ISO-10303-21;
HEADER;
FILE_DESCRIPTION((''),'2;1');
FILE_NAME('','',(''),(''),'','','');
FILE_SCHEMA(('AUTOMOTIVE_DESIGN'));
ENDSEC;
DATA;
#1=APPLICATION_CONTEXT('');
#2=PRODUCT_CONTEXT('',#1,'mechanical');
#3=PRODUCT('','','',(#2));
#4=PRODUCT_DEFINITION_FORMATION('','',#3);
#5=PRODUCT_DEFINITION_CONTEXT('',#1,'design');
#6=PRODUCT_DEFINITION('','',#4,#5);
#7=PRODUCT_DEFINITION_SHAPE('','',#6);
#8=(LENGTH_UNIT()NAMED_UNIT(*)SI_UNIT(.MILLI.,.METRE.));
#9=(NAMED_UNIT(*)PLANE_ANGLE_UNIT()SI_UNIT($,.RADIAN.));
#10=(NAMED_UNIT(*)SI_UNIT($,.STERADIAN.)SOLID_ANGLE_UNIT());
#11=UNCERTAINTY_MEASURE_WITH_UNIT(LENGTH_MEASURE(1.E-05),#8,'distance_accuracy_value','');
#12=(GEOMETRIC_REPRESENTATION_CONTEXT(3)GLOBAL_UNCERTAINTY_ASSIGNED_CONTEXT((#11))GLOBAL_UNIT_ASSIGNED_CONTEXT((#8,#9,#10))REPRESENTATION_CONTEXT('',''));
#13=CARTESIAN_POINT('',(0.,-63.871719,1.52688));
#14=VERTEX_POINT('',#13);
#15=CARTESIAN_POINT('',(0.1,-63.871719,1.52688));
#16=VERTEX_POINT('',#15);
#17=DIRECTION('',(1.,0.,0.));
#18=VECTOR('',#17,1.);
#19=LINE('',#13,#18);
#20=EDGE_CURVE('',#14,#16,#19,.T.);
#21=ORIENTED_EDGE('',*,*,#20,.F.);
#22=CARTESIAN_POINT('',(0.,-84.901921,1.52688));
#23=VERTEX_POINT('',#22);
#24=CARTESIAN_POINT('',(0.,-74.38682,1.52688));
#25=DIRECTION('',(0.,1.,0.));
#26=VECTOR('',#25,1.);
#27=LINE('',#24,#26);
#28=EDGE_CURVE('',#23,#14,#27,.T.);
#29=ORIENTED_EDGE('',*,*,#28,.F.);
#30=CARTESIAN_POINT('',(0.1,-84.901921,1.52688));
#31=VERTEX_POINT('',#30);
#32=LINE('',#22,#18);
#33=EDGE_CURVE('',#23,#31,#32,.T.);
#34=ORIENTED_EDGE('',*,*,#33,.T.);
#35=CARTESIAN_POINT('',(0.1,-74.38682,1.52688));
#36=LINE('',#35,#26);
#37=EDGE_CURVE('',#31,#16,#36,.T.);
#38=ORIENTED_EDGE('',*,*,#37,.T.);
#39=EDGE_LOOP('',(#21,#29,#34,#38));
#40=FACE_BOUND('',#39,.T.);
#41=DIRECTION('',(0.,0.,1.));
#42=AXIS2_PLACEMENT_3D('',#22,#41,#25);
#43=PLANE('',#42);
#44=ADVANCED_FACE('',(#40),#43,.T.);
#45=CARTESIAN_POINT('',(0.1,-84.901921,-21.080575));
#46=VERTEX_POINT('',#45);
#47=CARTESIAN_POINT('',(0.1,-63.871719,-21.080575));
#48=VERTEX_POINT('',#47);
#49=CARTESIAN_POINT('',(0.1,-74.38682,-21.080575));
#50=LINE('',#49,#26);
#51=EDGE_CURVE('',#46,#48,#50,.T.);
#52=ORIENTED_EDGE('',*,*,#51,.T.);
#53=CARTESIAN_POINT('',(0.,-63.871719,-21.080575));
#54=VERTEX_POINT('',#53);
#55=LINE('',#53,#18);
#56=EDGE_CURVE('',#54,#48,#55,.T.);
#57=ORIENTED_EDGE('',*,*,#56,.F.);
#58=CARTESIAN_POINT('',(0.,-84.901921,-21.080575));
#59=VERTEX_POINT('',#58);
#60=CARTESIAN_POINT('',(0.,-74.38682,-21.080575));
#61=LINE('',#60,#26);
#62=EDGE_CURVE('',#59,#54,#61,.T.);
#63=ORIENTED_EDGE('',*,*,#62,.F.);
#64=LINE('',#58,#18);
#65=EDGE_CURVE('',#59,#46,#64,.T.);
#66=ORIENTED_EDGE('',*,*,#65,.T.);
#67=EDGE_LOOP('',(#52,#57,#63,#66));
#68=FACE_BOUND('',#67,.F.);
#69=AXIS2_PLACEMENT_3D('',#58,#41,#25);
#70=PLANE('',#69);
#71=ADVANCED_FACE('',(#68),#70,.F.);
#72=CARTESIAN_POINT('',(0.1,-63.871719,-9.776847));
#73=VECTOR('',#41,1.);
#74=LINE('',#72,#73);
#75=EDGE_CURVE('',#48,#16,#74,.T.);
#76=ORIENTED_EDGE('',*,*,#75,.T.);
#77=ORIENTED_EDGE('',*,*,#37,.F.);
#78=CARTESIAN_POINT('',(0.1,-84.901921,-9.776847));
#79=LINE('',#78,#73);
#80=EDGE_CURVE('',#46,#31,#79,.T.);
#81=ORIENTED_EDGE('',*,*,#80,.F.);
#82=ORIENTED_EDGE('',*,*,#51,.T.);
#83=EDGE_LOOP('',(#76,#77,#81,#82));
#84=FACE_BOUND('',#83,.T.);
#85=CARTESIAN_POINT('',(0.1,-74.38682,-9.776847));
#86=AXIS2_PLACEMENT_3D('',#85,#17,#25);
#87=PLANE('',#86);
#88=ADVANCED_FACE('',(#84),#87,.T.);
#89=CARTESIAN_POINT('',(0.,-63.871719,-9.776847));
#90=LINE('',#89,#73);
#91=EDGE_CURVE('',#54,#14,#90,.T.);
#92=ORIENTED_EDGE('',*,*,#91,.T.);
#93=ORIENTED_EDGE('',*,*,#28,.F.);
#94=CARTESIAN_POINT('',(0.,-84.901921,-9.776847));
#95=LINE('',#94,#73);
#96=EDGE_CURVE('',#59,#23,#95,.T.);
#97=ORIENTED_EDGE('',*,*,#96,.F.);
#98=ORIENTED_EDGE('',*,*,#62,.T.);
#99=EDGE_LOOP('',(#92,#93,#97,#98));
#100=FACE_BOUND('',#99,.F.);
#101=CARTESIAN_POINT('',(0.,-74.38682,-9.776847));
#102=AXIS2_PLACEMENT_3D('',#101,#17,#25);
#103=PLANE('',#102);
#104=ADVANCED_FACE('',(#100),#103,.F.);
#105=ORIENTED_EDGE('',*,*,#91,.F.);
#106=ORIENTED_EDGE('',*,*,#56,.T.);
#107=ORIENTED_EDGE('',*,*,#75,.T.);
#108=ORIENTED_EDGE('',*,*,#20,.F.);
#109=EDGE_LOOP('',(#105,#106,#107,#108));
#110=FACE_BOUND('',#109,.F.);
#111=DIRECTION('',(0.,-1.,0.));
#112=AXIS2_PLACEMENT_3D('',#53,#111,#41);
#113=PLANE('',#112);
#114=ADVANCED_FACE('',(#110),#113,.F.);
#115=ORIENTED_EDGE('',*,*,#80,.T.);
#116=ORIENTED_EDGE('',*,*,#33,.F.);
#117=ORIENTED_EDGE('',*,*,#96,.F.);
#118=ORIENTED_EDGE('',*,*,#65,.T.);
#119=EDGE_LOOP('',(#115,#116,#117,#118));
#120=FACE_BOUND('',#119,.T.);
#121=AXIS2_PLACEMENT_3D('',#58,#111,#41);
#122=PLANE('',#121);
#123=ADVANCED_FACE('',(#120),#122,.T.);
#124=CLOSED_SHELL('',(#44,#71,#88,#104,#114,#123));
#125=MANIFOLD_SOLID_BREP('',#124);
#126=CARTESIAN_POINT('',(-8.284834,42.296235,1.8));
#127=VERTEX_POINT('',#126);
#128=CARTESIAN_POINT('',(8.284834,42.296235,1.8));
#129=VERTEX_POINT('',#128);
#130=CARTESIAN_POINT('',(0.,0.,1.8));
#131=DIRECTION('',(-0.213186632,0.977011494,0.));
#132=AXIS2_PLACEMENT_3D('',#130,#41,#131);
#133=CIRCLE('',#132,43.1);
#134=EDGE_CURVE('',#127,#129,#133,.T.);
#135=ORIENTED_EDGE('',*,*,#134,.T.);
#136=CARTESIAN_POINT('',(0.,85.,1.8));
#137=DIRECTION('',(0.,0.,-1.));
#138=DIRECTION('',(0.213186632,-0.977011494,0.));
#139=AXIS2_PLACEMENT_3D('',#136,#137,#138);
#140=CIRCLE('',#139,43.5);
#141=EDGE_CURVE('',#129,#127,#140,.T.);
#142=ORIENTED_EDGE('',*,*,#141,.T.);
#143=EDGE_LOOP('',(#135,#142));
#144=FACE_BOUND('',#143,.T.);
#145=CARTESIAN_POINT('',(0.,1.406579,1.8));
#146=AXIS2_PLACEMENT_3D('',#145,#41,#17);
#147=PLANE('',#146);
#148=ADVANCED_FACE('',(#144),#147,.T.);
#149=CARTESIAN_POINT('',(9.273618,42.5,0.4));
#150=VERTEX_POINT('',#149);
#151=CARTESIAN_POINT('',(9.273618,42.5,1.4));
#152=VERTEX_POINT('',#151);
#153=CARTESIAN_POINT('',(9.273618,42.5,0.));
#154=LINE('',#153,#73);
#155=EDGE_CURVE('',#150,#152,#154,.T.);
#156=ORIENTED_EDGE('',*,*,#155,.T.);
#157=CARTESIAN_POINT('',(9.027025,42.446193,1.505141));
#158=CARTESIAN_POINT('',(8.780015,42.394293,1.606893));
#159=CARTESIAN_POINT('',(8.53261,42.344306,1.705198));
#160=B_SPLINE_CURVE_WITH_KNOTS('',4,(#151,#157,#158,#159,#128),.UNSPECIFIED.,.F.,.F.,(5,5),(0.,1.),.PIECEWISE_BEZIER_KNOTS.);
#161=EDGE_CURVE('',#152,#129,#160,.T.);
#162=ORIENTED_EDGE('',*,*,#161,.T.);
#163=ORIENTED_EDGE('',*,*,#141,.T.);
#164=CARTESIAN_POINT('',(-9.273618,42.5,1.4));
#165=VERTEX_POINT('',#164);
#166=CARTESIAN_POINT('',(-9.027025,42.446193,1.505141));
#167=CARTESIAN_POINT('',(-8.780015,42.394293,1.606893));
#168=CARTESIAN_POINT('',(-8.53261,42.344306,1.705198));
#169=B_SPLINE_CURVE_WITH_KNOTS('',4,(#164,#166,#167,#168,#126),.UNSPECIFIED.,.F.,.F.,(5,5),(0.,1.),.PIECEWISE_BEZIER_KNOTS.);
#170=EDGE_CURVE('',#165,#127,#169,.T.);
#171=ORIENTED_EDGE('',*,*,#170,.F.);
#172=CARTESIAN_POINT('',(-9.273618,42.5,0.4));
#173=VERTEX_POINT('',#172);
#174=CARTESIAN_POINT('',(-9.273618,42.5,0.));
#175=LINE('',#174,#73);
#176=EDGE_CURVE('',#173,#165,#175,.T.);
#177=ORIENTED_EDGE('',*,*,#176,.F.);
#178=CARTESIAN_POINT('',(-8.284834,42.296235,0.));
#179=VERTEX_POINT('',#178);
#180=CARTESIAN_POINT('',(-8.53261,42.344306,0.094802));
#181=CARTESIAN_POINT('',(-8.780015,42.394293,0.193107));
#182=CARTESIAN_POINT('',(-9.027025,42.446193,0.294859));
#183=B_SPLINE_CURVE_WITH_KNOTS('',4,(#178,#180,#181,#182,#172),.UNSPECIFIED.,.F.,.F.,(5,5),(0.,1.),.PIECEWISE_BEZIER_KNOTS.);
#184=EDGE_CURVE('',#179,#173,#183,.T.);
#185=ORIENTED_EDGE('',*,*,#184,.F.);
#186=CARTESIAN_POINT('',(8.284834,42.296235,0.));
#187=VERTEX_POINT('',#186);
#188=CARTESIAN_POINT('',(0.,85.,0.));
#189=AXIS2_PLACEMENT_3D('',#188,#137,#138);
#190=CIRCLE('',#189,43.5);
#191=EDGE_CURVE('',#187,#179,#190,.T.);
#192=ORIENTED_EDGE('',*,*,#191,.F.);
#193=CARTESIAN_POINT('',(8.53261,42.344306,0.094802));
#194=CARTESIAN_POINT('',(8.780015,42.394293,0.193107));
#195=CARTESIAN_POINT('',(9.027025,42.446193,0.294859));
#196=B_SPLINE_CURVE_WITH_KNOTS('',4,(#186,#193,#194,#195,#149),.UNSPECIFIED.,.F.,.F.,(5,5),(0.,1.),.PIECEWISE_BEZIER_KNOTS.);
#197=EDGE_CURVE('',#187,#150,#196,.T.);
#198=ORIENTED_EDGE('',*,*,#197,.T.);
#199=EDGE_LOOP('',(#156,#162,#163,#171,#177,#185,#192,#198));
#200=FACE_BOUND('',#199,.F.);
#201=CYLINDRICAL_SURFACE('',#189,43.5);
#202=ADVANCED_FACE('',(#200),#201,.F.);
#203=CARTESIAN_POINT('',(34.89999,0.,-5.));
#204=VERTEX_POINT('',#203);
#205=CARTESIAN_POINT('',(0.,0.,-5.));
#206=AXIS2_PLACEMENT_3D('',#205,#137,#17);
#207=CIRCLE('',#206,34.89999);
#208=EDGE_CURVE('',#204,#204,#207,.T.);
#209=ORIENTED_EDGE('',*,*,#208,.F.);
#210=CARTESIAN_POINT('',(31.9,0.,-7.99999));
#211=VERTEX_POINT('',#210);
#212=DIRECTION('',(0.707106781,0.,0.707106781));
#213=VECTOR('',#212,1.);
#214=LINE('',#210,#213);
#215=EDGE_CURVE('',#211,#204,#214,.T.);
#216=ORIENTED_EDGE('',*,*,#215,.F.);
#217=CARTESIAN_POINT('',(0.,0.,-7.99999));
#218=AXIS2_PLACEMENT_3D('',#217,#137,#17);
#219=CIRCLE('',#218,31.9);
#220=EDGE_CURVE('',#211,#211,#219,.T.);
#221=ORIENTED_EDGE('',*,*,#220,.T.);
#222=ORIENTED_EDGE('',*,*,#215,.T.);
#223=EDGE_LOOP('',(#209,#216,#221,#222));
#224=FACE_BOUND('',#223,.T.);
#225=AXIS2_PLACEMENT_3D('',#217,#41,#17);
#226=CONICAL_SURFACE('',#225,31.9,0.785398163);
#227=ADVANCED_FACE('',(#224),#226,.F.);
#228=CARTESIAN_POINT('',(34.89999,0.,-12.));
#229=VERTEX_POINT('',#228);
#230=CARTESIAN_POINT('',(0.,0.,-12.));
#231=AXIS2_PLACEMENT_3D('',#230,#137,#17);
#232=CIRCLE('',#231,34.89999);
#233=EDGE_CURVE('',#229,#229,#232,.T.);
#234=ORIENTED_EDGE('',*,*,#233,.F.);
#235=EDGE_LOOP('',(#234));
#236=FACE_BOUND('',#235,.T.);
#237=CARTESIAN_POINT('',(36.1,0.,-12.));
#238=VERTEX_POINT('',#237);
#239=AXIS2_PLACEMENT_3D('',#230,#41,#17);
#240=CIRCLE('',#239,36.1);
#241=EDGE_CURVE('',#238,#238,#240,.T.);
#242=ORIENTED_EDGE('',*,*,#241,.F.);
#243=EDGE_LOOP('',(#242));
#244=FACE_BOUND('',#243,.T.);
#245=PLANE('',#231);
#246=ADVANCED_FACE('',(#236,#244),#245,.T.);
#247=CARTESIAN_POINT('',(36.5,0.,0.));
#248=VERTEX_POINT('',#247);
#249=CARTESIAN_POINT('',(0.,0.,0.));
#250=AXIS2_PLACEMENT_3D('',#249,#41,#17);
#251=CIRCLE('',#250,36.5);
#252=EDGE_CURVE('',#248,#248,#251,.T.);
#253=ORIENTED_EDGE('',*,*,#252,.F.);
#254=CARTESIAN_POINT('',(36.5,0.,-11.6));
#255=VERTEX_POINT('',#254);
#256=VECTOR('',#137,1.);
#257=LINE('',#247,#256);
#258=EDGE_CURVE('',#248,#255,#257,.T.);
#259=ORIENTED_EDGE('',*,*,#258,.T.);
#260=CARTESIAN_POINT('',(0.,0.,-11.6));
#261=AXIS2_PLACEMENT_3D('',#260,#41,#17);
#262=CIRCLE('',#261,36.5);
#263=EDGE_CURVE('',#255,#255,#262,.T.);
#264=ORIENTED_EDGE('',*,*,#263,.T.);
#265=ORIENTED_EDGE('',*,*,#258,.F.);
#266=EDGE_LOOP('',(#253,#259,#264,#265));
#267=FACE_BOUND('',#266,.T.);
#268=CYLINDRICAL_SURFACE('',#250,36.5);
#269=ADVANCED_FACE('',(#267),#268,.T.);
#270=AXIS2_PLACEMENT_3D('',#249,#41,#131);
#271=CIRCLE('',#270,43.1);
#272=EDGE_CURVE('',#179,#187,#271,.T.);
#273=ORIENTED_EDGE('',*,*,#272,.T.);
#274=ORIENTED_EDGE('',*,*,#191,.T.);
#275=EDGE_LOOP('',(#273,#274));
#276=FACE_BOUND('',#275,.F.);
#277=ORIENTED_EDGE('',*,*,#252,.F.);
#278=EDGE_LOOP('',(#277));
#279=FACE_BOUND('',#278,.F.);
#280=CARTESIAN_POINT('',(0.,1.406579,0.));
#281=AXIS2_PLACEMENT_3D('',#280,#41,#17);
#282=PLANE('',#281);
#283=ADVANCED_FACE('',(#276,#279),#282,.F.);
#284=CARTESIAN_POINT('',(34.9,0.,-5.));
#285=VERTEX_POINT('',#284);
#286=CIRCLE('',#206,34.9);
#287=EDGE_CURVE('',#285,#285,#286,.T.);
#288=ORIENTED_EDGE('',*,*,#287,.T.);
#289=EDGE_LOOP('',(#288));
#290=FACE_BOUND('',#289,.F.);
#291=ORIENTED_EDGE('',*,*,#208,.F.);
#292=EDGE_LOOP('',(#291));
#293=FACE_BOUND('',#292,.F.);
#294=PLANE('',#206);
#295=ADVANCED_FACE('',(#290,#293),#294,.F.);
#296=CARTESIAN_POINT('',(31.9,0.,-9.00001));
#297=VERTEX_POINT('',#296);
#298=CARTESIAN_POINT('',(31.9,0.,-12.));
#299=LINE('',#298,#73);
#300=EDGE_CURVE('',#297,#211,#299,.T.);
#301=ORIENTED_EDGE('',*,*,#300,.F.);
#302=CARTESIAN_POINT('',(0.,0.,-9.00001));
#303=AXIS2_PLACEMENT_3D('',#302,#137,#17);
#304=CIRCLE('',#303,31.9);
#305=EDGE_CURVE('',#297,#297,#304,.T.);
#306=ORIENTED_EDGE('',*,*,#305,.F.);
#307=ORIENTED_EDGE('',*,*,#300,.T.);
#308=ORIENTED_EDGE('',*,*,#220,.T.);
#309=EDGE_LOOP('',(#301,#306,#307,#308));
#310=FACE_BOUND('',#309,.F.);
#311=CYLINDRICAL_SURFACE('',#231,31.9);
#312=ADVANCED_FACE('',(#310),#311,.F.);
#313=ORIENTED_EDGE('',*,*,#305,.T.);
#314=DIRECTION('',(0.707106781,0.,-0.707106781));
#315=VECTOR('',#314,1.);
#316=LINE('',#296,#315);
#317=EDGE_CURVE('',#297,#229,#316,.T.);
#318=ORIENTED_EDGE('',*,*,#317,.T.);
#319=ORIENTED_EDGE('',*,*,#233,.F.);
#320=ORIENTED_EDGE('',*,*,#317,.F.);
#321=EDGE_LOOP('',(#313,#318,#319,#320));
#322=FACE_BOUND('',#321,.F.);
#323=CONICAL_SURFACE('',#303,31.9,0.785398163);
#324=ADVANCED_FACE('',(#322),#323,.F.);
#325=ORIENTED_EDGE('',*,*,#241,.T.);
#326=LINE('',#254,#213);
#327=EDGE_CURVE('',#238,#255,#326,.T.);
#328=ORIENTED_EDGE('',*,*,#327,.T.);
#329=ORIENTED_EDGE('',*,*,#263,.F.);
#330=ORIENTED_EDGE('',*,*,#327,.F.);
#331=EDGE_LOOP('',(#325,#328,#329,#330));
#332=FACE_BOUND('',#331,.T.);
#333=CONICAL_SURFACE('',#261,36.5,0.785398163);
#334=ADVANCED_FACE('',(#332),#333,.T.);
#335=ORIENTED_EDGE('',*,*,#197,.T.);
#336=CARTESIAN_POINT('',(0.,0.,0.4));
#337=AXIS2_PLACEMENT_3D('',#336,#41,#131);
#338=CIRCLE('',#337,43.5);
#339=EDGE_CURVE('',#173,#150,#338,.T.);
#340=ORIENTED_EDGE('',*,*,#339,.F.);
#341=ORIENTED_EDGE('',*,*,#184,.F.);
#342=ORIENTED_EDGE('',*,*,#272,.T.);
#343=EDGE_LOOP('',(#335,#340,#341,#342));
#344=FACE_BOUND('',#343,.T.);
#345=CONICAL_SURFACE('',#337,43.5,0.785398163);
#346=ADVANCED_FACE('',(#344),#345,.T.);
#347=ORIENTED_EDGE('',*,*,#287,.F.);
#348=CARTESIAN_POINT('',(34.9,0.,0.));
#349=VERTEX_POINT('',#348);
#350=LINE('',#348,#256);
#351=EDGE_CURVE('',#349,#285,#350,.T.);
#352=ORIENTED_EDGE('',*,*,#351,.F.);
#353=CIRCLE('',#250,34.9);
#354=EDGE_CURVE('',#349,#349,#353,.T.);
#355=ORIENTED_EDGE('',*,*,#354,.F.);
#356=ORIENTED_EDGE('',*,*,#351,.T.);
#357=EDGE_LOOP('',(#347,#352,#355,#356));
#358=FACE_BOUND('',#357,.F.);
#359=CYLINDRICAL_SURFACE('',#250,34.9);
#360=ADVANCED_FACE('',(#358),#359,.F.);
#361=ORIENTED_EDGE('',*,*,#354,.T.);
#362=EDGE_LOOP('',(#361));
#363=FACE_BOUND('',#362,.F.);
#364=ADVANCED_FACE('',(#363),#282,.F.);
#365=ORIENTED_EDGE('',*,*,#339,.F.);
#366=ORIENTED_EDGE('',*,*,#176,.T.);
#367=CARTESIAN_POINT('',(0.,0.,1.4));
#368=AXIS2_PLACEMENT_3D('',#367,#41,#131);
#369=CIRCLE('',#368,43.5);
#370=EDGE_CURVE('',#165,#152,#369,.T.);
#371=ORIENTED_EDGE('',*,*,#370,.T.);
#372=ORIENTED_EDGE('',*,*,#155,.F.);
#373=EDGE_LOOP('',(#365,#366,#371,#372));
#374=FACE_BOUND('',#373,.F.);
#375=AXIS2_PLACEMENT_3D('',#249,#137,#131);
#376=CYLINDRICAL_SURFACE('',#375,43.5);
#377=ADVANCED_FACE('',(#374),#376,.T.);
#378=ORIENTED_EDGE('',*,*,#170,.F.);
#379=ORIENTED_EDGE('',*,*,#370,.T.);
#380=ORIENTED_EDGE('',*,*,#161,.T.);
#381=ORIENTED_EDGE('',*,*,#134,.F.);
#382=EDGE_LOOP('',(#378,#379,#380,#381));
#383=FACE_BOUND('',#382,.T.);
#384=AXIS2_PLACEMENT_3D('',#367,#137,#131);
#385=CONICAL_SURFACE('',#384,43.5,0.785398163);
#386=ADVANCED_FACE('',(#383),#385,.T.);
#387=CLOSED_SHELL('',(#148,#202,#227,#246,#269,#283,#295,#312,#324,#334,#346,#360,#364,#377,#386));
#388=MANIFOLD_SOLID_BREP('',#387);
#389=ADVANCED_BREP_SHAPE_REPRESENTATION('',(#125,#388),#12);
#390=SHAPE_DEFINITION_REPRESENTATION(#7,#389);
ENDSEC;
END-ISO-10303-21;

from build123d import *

# Parameters (mm, degrees)
F0_R     = 36.5
F0_R_2   = 34.9
F1_DEPTH = 1.8
F2_DEPTH = 12
F3_R     = 34.9
F3_R_2   = 31.9
F4_DEPTH = 7
F5_SIZE  = 2.99999
F6_W     = 21.030202508
F6_H     = 22.6074543316
F7_DEPTH = 0.1
F8_SIZE  = 0.4


# Not quite as in the source:
# - a fillet or chamfer is up to 0.001 mm smaller than in the source, because OpenCascade refuses the exact size


with BuildPart() as f1:
    # F0 (on Top) → F1 (new body)
    with BuildSketch(Plane.XY):
        with BuildLine():
            ThreePointArc((-9.2736184955, 42.5), (-27.2841308772, -33.8795838563), (43.5, 0))
            ThreePointArc((43.5, 0), (33.8795838563, 27.2841308772), (9.2736184955, 42.5))
            ThreePointArc((9.2736184955, 42.5), (0, 41.5), (-9.2736184955, 42.5))
        make_face()
        Circle(F0_R, mode=Mode.SUBTRACT)
        Circle(F0_R)
        Circle(F0_R_2, mode=Mode.SUBTRACT)
        Circle(F0_R_2)
    extrude(amount=F1_DEPTH)

    # F0 (on Top) → F2 (join)
    with BuildSketch(Plane.XY):
        Circle(F0_R)
        Circle(F0_R_2, mode=Mode.SUBTRACT)
    extrude(amount=-F2_DEPTH)

    # F3 (on face) → F4 (join)
    with BuildSketch(Plane(origin=(0, 0, -12), x_dir=(1, 0, 0), z_dir=(0, 0, -1))):
        Circle(F3_R)
        Circle(F3_R_2, mode=Mode.SUBTRACT)
    extrude(amount=-F4_DEPTH)

    # F5 (size 3 in the source; OpenCascade refuses exactly that, so slightly less here)
    f5_edges = [f1.edges().sort_by_distance(p)[0] for p in [
        (-31.9, 0, -12),
        (-31.9, 0, -5),
    ]]
    chamfer(f5_edges, length=F5_SIZE)

    # F8
    f8_edges = [f1.edges().sort_by_distance(p)[0] for p in [
        (0, -43.5, 1.8),
        (-36.5, 0, -12),
        (0, -43.5, 0),
    ]]
    chamfer(f8_edges, length=F8_SIZE)


with BuildPart() as f7:
    # F6 (on Right) → F7 (new body)
    with BuildSketch(Plane.YZ):
        with Locations((-74.3868201971, -9.776847437)):
            Rectangle(F6_W, F6_H)
    extrude(amount=F7_DEPTH)


solid = Compound([f1.part, f7.part])
